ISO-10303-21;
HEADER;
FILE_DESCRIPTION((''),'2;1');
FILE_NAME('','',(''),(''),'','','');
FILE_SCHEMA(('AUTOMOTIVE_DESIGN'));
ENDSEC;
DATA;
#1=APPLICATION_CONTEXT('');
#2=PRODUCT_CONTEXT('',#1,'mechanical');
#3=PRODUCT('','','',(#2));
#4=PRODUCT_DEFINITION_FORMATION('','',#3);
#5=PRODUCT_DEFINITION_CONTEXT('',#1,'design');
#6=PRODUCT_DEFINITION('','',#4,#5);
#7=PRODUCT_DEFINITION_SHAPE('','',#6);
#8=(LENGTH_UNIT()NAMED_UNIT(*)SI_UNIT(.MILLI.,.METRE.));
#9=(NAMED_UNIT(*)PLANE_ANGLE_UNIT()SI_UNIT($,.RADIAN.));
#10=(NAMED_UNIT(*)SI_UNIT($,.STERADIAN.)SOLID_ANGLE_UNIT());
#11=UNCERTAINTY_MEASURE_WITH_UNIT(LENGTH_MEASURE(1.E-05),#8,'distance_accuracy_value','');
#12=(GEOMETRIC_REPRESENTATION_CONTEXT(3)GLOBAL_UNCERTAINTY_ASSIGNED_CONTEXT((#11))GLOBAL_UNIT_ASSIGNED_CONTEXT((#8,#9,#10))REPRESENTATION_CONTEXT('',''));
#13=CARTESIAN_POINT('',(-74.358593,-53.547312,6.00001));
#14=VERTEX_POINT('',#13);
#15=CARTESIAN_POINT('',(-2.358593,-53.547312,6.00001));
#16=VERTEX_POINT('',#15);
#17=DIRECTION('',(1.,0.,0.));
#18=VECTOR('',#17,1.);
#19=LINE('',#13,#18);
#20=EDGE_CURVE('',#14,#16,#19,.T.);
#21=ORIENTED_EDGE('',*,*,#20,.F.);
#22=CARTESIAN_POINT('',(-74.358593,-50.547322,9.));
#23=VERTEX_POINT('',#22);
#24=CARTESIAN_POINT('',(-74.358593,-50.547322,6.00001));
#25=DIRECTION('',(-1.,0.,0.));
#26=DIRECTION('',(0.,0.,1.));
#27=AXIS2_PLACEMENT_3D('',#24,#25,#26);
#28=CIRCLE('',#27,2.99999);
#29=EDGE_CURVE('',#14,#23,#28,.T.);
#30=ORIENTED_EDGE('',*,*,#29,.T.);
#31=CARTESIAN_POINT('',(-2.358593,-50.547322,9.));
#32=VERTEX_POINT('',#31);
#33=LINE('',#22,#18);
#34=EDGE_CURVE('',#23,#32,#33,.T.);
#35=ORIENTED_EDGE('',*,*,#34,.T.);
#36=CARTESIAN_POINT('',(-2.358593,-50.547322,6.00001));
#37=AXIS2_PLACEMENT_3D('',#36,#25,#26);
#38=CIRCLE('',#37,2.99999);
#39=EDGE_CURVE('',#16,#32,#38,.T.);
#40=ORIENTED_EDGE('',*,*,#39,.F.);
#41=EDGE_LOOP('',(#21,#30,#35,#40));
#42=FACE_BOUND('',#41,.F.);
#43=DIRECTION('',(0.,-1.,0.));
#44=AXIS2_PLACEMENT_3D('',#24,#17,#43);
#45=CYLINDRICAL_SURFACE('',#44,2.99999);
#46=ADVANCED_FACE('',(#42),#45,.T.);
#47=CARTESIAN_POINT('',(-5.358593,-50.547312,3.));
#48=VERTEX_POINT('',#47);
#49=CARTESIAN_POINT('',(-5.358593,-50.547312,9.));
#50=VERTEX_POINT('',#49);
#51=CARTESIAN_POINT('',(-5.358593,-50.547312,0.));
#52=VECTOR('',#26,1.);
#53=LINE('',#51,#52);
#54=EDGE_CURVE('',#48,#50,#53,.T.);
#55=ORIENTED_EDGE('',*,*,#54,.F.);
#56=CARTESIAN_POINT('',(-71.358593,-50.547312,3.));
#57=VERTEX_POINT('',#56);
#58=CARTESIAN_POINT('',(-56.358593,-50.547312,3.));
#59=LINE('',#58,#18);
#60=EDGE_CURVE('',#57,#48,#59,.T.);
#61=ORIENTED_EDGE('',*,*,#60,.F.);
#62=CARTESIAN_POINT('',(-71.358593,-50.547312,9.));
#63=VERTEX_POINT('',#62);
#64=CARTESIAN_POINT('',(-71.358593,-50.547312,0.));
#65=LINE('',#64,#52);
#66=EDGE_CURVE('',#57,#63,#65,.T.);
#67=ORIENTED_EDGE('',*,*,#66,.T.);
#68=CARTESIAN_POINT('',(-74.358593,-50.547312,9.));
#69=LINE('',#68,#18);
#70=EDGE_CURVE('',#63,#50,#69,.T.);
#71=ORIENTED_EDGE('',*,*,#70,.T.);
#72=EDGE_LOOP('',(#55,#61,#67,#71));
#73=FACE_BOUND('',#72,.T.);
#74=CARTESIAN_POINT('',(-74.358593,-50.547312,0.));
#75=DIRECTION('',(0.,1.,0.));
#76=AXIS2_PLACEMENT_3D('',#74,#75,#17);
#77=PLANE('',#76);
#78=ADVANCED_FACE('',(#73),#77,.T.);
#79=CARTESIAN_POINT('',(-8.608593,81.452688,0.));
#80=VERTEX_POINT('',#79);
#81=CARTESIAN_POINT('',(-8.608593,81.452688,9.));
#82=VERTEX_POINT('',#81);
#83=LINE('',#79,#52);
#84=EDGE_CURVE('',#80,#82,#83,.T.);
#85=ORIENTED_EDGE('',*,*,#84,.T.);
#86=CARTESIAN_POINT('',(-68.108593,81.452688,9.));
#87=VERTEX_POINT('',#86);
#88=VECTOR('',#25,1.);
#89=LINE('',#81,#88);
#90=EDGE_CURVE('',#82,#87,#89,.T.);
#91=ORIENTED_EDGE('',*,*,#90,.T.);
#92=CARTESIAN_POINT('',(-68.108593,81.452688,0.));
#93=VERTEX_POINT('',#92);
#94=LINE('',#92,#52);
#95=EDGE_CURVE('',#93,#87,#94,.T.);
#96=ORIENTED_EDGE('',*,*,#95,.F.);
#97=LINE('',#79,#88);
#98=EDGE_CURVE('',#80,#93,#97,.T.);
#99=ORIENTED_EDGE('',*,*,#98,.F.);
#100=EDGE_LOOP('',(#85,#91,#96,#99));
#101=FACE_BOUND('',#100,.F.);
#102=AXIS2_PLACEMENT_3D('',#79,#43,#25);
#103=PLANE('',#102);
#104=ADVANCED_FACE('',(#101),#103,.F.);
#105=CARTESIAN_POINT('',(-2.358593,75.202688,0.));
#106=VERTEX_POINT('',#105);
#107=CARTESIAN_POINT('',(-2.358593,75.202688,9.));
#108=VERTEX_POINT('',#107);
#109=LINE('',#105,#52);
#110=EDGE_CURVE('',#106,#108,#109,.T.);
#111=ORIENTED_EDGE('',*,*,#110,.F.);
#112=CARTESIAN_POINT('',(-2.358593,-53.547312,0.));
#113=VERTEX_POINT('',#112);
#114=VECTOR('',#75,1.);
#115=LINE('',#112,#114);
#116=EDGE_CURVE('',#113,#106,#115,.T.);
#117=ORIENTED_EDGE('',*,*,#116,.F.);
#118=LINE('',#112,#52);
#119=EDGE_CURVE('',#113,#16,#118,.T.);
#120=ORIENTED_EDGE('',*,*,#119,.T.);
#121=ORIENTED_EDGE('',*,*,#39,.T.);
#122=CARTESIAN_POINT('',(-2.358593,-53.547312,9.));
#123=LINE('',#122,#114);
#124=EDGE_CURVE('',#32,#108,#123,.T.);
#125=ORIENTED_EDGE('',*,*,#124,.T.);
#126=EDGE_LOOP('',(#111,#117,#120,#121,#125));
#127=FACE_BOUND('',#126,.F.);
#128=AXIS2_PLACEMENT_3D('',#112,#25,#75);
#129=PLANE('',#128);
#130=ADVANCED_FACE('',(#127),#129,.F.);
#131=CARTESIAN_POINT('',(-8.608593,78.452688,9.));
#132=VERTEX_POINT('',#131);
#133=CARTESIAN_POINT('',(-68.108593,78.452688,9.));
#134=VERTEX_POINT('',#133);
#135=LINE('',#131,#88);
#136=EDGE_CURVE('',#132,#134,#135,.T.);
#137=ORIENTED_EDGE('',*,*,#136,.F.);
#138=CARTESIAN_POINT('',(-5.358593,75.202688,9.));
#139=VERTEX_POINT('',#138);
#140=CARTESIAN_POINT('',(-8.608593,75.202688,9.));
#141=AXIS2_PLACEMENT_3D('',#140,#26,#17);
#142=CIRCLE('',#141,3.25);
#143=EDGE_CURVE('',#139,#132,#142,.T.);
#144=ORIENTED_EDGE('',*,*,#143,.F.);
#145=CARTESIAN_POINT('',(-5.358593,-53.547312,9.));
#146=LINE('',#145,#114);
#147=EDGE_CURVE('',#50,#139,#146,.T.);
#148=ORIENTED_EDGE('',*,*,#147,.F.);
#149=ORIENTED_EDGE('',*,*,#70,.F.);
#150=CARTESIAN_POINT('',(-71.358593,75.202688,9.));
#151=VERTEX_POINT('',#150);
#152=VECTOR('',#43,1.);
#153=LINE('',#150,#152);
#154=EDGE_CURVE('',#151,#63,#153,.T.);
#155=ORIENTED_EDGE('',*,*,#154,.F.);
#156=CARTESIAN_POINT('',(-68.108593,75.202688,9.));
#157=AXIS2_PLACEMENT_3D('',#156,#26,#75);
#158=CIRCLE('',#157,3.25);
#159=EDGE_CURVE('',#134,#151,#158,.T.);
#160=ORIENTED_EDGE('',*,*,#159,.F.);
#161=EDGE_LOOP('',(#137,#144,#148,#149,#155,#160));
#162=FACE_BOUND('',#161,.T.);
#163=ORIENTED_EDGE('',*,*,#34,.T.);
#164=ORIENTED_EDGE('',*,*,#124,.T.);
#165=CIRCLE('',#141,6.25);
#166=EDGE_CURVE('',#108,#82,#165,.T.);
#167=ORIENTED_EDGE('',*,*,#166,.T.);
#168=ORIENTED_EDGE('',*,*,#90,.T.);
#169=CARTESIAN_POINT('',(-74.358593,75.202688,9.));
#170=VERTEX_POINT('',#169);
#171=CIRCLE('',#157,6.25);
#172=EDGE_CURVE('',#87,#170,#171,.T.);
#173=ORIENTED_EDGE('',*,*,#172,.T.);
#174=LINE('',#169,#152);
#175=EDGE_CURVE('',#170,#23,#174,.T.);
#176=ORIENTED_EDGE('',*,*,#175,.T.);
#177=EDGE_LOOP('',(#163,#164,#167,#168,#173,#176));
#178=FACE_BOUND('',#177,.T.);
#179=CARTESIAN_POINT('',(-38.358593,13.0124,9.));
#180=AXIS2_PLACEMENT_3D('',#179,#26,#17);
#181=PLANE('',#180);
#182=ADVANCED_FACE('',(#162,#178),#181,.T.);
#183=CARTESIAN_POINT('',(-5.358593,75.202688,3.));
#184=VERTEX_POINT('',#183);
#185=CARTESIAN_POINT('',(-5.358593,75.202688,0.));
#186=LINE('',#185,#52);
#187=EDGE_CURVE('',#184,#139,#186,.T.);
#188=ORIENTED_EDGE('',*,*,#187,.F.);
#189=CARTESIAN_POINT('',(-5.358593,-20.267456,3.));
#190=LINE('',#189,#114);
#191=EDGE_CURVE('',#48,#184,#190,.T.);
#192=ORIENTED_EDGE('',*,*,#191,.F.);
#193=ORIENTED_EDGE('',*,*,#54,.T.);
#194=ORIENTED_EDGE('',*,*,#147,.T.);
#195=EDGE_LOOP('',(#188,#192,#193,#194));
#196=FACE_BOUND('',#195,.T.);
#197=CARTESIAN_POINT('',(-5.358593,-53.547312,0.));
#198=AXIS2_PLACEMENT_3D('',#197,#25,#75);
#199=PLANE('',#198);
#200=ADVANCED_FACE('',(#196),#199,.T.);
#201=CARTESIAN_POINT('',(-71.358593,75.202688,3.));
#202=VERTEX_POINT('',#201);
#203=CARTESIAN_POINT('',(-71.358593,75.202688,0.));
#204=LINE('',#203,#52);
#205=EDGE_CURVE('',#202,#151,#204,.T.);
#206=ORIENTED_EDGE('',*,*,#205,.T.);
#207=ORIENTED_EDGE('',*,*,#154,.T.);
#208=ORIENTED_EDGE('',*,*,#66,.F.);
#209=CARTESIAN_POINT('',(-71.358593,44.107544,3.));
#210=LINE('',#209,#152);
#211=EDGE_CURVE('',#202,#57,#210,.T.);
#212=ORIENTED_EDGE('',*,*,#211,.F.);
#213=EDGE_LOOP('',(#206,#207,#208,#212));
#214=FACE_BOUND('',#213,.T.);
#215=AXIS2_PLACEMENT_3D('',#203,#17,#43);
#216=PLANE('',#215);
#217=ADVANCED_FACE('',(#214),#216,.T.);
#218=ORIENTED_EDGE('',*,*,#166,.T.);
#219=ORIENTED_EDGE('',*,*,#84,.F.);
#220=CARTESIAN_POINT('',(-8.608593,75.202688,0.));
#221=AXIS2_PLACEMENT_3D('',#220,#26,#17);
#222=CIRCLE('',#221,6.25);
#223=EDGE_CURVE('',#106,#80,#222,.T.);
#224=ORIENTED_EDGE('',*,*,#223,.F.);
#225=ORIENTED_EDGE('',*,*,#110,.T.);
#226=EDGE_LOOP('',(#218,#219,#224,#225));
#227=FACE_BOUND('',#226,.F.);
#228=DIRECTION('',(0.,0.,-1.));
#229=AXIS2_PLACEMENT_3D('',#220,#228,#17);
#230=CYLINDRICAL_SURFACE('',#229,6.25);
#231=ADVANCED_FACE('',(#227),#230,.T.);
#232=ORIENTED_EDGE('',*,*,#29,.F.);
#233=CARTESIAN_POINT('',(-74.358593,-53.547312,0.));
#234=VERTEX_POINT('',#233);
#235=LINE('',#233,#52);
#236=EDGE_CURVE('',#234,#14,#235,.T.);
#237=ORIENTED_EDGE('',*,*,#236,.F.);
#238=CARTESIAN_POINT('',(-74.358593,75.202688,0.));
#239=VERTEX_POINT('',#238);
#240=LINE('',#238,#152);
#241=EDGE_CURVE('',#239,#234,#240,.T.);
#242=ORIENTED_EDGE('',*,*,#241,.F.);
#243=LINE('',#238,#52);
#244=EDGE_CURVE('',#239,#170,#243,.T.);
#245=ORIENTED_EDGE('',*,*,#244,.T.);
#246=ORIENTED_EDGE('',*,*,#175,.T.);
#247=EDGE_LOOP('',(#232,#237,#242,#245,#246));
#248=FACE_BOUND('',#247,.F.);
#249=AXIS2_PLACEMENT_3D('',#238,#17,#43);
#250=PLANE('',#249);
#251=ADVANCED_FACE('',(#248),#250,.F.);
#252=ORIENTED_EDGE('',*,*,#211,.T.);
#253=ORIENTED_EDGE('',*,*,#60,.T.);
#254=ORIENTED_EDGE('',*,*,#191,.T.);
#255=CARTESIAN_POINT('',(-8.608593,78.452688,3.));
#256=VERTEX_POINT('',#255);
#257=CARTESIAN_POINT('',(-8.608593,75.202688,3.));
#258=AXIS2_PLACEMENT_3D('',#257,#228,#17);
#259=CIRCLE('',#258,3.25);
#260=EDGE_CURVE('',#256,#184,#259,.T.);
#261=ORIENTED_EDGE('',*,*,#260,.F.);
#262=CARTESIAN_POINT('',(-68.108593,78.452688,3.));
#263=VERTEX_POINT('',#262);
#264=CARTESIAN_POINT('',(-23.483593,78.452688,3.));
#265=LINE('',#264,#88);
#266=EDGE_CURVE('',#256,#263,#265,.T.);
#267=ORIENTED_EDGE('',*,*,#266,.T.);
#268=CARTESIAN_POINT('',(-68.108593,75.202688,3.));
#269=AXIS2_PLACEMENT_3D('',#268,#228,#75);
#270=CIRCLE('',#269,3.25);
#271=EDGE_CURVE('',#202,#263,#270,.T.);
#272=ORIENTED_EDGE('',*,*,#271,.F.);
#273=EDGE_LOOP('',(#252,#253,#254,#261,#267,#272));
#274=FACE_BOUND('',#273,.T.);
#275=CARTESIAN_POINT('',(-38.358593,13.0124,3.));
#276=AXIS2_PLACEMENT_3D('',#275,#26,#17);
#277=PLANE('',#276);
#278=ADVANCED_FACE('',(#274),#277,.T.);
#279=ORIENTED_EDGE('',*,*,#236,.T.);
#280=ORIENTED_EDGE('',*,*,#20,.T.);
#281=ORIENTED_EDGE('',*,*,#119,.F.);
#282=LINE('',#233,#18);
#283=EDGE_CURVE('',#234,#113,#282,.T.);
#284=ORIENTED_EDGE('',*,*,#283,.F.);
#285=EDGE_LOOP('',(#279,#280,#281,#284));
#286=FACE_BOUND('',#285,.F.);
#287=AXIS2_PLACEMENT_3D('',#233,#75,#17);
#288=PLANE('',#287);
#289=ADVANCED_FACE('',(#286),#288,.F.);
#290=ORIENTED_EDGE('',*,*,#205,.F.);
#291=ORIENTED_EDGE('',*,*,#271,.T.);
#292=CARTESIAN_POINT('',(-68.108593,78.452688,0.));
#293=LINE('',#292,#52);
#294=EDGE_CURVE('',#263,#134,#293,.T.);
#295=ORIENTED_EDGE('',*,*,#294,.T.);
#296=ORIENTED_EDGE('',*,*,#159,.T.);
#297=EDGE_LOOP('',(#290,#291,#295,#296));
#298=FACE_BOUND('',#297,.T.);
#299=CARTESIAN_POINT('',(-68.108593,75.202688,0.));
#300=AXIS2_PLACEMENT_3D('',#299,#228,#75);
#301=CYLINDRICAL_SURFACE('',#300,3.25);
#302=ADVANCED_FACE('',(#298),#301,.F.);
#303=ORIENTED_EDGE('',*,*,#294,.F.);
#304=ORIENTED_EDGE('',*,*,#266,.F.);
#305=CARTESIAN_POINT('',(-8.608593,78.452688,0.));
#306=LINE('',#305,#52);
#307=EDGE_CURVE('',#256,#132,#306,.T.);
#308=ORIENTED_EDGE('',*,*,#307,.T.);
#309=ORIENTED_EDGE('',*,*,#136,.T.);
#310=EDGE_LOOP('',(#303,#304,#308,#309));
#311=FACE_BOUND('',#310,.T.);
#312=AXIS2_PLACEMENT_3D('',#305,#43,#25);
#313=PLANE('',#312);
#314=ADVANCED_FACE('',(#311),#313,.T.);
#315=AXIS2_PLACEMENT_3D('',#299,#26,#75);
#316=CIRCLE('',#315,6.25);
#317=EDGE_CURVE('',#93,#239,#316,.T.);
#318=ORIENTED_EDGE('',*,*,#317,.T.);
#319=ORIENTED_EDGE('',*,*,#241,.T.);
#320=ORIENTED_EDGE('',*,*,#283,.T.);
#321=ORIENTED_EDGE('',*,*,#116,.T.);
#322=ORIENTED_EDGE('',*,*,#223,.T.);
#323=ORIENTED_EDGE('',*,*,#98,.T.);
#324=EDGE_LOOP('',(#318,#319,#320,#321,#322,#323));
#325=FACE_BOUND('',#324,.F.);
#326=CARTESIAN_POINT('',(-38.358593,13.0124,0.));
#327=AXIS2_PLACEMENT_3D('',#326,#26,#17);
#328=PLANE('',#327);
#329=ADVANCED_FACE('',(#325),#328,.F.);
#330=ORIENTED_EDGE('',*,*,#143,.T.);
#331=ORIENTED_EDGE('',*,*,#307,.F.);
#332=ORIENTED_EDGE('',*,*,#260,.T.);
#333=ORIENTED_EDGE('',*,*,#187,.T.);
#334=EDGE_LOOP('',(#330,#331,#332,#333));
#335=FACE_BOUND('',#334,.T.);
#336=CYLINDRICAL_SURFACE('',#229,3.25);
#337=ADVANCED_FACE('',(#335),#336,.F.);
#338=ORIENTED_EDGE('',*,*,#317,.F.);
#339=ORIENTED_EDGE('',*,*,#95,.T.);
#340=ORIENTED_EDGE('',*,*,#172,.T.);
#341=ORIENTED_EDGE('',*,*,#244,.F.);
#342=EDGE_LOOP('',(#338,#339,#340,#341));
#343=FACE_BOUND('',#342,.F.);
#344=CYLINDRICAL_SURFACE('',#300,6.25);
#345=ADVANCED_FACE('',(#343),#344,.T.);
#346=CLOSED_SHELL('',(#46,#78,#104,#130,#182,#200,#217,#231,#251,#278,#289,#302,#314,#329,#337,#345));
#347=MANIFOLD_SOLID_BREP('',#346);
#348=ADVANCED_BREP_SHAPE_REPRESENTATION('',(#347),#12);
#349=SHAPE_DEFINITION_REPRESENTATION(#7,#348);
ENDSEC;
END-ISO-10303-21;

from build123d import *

# Parameters (mm, degrees)
F1_DEPTH = 9
F2_T     = -3
F3_R     = 2.99999


# Not quite as in the source:
# - a fillet or chamfer is up to 0.001 mm smaller than in the source, because OpenCascade refuses the exact size


with BuildPart() as f1:
    # F0 (on Top) → F1 (new body)
    with BuildSketch(Plane.XY):
        with BuildLine():
            Line((-74.3585927405, 75.2026882768), (-74.3585927405, -53.5473117232))
            Line((-74.3585927405, -53.5473117232), (-2.3585927405, -53.5473117232))
            Line((-2.3585927405, -53.5473117232), (-2.3585927405, 75.2026882768))
            ThreePointArc((-2.3585927405, 75.2026882768), (-4.189175358, 79.6221056592), (-8.6085927405, 81.4526882768))
            Line((-8.6085927405, 81.4526882768), (-68.1085927405, 81.4526882768))
            ThreePointArc((-68.1085927405, 81.4526882768), (-72.5280101229, 79.6221056592), (-74.3585927405, 75.2026882768))
        make_face()
    extrude(amount=F1_DEPTH)

    # F2
    f2_openings = [f1.faces().sort_by_distance(p)[0] for p in [
        (-38.358593, 13.83847, 9),
    ]]
    offset(amount=F2_T, openings=f2_openings)

    # F3 (radius 3 in the source; OpenCascade refuses exactly that, so slightly less here)
    f3_edges = [f1.edges().sort_by_distance(p)[0] for p in [
        (-38.358593, -53.547312, 9),
    ]]
    fillet(f3_edges, radius=F3_R)


solid = f1.part
